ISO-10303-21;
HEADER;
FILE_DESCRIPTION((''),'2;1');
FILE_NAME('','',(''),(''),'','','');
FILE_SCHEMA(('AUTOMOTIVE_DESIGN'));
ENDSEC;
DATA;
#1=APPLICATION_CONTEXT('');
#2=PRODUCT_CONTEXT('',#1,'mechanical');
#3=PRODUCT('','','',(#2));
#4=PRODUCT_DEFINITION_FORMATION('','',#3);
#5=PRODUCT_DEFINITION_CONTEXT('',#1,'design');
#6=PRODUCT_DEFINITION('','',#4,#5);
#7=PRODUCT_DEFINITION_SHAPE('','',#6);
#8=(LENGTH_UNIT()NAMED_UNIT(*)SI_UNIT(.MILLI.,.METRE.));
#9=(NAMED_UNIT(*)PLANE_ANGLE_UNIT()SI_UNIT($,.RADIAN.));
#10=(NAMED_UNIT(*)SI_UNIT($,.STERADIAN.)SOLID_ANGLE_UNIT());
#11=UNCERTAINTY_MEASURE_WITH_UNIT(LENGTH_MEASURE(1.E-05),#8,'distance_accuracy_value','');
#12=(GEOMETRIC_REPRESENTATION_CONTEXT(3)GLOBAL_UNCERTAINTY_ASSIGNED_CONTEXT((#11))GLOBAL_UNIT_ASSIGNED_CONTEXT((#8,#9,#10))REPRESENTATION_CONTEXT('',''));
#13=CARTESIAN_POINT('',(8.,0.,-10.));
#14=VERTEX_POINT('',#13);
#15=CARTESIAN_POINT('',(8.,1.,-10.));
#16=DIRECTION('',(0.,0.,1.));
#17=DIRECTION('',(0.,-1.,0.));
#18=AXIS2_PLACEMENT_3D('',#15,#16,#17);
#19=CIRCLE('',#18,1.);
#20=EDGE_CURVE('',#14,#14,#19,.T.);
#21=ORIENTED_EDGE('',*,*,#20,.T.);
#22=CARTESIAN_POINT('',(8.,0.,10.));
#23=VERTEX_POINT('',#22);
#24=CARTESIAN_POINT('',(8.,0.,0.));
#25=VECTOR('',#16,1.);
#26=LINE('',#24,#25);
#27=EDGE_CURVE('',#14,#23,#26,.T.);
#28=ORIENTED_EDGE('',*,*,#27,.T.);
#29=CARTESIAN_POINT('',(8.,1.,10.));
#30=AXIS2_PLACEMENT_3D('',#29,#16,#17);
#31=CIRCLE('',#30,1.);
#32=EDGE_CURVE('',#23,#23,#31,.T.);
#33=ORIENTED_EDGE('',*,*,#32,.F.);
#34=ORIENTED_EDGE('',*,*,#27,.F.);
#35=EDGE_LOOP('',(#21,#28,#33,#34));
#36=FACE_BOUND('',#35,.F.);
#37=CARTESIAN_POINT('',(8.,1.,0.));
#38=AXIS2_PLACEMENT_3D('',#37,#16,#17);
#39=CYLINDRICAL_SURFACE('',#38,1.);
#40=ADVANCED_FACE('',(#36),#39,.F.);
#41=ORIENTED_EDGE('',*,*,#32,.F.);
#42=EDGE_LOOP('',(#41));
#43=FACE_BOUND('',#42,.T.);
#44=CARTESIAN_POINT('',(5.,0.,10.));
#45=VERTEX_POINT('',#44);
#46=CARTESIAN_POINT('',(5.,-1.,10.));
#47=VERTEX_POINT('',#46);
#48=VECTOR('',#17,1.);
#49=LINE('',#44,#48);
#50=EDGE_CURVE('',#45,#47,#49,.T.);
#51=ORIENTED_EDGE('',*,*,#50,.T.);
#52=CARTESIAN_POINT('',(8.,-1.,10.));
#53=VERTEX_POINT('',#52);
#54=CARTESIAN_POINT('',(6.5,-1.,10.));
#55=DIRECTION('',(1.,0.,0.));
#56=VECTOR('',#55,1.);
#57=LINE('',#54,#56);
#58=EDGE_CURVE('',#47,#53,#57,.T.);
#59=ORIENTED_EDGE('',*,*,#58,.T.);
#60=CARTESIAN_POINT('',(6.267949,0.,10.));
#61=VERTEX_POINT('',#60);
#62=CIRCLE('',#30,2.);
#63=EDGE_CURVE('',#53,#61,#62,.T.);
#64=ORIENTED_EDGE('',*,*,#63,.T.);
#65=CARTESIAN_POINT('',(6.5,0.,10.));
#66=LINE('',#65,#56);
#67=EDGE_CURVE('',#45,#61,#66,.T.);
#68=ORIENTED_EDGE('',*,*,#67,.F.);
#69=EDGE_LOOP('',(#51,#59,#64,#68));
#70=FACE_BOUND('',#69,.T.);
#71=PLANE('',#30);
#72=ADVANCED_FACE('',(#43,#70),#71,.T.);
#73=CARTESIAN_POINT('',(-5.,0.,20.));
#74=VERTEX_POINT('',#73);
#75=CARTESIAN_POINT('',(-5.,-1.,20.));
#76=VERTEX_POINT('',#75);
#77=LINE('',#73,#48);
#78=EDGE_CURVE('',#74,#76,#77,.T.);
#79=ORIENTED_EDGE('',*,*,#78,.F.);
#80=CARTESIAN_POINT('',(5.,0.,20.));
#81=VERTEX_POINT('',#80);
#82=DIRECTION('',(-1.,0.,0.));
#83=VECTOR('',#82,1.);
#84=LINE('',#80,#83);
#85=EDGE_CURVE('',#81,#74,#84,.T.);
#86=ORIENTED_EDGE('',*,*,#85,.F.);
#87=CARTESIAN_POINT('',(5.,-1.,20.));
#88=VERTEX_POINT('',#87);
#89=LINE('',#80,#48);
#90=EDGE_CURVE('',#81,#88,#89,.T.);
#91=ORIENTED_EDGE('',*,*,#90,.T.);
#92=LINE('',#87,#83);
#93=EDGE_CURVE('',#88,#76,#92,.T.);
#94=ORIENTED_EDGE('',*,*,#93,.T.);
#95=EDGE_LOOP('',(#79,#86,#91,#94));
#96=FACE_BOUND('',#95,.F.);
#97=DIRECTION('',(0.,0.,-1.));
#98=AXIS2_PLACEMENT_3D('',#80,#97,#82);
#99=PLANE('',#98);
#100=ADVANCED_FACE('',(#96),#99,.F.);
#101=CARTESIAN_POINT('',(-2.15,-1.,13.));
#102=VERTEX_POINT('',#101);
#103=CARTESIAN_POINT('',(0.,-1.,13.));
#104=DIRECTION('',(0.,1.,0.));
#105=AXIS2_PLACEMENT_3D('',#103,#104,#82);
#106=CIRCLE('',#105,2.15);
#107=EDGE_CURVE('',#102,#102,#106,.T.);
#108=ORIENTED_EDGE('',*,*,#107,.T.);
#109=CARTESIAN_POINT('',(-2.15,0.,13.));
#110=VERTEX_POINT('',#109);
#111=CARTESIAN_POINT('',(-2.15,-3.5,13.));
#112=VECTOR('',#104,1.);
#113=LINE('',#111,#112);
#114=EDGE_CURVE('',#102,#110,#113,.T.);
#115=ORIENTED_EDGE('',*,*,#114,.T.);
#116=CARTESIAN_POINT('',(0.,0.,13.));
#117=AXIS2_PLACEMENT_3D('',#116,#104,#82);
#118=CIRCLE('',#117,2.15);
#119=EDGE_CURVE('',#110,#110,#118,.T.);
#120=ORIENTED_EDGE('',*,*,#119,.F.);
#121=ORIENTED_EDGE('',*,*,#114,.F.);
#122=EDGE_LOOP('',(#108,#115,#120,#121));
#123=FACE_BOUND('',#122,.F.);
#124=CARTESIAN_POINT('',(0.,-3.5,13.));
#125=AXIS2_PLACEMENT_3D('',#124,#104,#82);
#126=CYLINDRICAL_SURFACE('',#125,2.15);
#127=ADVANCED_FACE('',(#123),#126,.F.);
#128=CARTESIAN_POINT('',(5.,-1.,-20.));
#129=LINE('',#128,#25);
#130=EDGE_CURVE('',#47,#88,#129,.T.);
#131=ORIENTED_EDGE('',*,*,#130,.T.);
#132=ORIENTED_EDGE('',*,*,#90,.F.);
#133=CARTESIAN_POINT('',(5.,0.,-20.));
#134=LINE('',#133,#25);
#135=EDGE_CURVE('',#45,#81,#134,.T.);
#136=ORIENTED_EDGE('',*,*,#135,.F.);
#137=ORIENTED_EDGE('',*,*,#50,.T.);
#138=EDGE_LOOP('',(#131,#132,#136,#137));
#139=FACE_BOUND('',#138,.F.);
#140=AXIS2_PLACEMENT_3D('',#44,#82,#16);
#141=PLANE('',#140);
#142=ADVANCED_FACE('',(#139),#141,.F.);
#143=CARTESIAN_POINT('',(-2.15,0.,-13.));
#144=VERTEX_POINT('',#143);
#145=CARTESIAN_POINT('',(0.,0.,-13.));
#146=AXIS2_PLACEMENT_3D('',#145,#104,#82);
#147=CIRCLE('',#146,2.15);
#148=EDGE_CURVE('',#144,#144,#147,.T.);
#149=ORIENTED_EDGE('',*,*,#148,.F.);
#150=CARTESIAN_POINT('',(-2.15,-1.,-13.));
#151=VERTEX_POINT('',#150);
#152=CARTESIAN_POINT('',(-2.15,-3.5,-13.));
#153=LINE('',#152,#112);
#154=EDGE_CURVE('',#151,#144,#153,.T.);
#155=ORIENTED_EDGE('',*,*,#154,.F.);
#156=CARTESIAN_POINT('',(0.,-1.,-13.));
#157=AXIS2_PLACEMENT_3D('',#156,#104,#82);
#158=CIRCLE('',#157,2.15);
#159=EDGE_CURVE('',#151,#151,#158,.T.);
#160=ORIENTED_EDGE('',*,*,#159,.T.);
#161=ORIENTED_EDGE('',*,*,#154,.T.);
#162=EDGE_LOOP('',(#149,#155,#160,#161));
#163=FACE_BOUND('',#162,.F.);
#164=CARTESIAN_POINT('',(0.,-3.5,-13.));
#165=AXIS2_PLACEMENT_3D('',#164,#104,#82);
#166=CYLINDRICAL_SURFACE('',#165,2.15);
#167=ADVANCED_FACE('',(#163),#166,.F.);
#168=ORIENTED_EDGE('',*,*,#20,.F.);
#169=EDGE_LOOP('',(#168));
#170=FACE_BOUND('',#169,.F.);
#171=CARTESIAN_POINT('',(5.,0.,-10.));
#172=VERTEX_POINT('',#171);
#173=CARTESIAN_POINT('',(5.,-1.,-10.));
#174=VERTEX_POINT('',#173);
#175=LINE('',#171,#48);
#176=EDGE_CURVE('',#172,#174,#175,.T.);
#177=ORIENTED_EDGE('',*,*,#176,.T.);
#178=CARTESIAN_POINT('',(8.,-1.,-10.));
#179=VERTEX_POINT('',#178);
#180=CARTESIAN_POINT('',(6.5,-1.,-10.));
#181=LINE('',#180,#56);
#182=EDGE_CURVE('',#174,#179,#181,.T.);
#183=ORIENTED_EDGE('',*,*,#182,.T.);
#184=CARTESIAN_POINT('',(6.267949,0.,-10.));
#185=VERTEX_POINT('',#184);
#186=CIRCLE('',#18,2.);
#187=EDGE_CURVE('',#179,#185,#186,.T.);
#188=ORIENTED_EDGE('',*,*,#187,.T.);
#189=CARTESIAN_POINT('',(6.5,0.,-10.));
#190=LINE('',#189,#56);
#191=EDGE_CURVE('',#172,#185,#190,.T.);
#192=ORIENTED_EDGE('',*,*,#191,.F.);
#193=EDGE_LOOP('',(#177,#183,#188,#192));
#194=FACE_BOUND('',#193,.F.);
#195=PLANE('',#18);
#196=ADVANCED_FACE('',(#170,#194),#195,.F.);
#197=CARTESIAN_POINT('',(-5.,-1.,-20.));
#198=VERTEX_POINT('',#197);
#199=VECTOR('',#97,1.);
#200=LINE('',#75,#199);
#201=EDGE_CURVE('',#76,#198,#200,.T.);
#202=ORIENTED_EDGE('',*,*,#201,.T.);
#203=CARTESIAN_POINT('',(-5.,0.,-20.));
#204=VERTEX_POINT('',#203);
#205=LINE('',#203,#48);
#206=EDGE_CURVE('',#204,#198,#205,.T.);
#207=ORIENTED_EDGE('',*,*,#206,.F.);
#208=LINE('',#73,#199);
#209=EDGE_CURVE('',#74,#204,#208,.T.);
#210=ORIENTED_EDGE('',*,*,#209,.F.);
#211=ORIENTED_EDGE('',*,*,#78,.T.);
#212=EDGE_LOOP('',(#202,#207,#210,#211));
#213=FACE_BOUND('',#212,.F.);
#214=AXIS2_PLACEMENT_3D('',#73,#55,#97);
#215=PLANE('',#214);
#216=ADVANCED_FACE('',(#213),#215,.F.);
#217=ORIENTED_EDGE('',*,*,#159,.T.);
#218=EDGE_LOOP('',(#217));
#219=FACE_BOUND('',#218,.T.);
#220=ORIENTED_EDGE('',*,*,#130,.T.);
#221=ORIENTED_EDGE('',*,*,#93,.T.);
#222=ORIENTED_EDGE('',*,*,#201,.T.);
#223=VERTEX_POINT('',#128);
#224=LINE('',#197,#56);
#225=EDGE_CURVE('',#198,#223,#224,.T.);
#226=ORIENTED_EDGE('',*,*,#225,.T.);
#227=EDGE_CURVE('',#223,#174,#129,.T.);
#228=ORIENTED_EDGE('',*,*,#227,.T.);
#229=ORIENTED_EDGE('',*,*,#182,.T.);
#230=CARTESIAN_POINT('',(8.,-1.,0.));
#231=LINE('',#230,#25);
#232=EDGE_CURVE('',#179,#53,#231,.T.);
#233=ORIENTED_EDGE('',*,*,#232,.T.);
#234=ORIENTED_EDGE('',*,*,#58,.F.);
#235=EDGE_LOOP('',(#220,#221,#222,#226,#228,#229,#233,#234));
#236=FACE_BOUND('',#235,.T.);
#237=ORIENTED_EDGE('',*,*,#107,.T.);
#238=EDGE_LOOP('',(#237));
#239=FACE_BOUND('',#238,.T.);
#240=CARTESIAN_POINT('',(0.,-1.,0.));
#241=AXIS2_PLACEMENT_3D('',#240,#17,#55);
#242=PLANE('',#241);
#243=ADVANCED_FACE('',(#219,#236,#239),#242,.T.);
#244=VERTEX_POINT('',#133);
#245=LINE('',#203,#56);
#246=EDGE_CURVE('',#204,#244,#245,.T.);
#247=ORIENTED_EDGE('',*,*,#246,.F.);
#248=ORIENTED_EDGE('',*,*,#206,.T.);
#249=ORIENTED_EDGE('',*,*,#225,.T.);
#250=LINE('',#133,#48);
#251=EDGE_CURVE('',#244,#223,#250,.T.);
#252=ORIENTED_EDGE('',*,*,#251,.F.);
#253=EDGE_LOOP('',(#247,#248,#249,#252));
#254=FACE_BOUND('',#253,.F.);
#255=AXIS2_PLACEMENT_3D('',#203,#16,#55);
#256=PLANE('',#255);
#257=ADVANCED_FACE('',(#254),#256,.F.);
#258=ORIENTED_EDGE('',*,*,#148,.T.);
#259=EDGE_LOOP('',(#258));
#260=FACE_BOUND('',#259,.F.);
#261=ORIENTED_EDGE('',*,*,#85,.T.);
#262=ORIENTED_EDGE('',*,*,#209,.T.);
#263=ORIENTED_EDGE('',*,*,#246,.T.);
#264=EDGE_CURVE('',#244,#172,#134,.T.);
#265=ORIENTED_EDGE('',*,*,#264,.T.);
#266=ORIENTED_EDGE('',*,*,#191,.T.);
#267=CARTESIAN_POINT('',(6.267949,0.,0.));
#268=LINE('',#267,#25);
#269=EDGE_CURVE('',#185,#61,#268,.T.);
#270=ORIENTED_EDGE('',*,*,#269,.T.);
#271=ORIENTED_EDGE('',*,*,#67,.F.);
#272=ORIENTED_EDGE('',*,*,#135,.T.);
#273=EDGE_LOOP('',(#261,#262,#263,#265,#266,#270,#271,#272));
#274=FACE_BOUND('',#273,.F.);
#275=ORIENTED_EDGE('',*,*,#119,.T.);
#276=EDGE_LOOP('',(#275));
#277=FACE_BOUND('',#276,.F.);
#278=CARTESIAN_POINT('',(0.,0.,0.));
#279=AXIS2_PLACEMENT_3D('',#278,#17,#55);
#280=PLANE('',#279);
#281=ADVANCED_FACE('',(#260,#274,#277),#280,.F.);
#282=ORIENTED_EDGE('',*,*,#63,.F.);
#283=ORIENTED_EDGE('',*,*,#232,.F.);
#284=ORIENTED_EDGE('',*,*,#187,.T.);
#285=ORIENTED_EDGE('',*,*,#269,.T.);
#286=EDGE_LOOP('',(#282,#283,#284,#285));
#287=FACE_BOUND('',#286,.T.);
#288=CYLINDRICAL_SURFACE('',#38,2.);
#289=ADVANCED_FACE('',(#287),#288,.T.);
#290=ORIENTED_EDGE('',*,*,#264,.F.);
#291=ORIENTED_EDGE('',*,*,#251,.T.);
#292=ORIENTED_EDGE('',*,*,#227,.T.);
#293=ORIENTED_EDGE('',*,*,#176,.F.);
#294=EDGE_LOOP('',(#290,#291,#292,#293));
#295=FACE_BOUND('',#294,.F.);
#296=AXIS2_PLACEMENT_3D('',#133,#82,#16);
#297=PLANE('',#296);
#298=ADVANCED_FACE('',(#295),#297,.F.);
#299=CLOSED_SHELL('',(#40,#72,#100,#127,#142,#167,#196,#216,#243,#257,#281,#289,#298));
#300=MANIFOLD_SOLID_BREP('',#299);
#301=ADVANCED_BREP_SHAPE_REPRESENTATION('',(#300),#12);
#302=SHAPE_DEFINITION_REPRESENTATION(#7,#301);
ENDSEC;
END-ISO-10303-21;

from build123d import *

# Parameters (mm, degrees)
F0_W     = 3
F0_H     = 20
F1_DEPTH = 1
F2_W     = 1
F2_H     = 20
F5_D     = 4.3
F5_DEPTH = 2.5
F5_TIP   = 1.2918503309


# Not quite as in the source:
# - a feature names something its author has since deleted; it is built from what else it names


with BuildPart() as f1:
    # F0 (on Front) → F1 (new body)
    with BuildSketch(Plane.XZ):
        Polygon((5, 10), (5, 20), (-5, 20), (-5, -20), (5, -20), (5, -10), align=None)
        with Locations((6.5, 0)):
            Rectangle(F0_W, F0_H)
    extrude(amount=F1_DEPTH)

    # F2 (on face) → F3 (revolve)
    with BuildSketch(Plane.YZ.offset(8)):
        with Locations((-0.5, 0)):
            Rectangle(F2_W, F2_H)
    revolve(axis=Axis((8, 1, 0), (0, 0, 1)))

    # F5
    with Locations(Plane.XZ.offset(1)):
        with Locations((0, 13), (0, -13)):
            Hole(F5_D / 2, depth=F5_DEPTH)
            with Locations((0, 0, -(F5_DEPTH + F5_TIP / 2))):  # 118° drill point
                Cone(0, F5_D / 2, F5_TIP, mode=Mode.SUBTRACT)


solid = f1.part
